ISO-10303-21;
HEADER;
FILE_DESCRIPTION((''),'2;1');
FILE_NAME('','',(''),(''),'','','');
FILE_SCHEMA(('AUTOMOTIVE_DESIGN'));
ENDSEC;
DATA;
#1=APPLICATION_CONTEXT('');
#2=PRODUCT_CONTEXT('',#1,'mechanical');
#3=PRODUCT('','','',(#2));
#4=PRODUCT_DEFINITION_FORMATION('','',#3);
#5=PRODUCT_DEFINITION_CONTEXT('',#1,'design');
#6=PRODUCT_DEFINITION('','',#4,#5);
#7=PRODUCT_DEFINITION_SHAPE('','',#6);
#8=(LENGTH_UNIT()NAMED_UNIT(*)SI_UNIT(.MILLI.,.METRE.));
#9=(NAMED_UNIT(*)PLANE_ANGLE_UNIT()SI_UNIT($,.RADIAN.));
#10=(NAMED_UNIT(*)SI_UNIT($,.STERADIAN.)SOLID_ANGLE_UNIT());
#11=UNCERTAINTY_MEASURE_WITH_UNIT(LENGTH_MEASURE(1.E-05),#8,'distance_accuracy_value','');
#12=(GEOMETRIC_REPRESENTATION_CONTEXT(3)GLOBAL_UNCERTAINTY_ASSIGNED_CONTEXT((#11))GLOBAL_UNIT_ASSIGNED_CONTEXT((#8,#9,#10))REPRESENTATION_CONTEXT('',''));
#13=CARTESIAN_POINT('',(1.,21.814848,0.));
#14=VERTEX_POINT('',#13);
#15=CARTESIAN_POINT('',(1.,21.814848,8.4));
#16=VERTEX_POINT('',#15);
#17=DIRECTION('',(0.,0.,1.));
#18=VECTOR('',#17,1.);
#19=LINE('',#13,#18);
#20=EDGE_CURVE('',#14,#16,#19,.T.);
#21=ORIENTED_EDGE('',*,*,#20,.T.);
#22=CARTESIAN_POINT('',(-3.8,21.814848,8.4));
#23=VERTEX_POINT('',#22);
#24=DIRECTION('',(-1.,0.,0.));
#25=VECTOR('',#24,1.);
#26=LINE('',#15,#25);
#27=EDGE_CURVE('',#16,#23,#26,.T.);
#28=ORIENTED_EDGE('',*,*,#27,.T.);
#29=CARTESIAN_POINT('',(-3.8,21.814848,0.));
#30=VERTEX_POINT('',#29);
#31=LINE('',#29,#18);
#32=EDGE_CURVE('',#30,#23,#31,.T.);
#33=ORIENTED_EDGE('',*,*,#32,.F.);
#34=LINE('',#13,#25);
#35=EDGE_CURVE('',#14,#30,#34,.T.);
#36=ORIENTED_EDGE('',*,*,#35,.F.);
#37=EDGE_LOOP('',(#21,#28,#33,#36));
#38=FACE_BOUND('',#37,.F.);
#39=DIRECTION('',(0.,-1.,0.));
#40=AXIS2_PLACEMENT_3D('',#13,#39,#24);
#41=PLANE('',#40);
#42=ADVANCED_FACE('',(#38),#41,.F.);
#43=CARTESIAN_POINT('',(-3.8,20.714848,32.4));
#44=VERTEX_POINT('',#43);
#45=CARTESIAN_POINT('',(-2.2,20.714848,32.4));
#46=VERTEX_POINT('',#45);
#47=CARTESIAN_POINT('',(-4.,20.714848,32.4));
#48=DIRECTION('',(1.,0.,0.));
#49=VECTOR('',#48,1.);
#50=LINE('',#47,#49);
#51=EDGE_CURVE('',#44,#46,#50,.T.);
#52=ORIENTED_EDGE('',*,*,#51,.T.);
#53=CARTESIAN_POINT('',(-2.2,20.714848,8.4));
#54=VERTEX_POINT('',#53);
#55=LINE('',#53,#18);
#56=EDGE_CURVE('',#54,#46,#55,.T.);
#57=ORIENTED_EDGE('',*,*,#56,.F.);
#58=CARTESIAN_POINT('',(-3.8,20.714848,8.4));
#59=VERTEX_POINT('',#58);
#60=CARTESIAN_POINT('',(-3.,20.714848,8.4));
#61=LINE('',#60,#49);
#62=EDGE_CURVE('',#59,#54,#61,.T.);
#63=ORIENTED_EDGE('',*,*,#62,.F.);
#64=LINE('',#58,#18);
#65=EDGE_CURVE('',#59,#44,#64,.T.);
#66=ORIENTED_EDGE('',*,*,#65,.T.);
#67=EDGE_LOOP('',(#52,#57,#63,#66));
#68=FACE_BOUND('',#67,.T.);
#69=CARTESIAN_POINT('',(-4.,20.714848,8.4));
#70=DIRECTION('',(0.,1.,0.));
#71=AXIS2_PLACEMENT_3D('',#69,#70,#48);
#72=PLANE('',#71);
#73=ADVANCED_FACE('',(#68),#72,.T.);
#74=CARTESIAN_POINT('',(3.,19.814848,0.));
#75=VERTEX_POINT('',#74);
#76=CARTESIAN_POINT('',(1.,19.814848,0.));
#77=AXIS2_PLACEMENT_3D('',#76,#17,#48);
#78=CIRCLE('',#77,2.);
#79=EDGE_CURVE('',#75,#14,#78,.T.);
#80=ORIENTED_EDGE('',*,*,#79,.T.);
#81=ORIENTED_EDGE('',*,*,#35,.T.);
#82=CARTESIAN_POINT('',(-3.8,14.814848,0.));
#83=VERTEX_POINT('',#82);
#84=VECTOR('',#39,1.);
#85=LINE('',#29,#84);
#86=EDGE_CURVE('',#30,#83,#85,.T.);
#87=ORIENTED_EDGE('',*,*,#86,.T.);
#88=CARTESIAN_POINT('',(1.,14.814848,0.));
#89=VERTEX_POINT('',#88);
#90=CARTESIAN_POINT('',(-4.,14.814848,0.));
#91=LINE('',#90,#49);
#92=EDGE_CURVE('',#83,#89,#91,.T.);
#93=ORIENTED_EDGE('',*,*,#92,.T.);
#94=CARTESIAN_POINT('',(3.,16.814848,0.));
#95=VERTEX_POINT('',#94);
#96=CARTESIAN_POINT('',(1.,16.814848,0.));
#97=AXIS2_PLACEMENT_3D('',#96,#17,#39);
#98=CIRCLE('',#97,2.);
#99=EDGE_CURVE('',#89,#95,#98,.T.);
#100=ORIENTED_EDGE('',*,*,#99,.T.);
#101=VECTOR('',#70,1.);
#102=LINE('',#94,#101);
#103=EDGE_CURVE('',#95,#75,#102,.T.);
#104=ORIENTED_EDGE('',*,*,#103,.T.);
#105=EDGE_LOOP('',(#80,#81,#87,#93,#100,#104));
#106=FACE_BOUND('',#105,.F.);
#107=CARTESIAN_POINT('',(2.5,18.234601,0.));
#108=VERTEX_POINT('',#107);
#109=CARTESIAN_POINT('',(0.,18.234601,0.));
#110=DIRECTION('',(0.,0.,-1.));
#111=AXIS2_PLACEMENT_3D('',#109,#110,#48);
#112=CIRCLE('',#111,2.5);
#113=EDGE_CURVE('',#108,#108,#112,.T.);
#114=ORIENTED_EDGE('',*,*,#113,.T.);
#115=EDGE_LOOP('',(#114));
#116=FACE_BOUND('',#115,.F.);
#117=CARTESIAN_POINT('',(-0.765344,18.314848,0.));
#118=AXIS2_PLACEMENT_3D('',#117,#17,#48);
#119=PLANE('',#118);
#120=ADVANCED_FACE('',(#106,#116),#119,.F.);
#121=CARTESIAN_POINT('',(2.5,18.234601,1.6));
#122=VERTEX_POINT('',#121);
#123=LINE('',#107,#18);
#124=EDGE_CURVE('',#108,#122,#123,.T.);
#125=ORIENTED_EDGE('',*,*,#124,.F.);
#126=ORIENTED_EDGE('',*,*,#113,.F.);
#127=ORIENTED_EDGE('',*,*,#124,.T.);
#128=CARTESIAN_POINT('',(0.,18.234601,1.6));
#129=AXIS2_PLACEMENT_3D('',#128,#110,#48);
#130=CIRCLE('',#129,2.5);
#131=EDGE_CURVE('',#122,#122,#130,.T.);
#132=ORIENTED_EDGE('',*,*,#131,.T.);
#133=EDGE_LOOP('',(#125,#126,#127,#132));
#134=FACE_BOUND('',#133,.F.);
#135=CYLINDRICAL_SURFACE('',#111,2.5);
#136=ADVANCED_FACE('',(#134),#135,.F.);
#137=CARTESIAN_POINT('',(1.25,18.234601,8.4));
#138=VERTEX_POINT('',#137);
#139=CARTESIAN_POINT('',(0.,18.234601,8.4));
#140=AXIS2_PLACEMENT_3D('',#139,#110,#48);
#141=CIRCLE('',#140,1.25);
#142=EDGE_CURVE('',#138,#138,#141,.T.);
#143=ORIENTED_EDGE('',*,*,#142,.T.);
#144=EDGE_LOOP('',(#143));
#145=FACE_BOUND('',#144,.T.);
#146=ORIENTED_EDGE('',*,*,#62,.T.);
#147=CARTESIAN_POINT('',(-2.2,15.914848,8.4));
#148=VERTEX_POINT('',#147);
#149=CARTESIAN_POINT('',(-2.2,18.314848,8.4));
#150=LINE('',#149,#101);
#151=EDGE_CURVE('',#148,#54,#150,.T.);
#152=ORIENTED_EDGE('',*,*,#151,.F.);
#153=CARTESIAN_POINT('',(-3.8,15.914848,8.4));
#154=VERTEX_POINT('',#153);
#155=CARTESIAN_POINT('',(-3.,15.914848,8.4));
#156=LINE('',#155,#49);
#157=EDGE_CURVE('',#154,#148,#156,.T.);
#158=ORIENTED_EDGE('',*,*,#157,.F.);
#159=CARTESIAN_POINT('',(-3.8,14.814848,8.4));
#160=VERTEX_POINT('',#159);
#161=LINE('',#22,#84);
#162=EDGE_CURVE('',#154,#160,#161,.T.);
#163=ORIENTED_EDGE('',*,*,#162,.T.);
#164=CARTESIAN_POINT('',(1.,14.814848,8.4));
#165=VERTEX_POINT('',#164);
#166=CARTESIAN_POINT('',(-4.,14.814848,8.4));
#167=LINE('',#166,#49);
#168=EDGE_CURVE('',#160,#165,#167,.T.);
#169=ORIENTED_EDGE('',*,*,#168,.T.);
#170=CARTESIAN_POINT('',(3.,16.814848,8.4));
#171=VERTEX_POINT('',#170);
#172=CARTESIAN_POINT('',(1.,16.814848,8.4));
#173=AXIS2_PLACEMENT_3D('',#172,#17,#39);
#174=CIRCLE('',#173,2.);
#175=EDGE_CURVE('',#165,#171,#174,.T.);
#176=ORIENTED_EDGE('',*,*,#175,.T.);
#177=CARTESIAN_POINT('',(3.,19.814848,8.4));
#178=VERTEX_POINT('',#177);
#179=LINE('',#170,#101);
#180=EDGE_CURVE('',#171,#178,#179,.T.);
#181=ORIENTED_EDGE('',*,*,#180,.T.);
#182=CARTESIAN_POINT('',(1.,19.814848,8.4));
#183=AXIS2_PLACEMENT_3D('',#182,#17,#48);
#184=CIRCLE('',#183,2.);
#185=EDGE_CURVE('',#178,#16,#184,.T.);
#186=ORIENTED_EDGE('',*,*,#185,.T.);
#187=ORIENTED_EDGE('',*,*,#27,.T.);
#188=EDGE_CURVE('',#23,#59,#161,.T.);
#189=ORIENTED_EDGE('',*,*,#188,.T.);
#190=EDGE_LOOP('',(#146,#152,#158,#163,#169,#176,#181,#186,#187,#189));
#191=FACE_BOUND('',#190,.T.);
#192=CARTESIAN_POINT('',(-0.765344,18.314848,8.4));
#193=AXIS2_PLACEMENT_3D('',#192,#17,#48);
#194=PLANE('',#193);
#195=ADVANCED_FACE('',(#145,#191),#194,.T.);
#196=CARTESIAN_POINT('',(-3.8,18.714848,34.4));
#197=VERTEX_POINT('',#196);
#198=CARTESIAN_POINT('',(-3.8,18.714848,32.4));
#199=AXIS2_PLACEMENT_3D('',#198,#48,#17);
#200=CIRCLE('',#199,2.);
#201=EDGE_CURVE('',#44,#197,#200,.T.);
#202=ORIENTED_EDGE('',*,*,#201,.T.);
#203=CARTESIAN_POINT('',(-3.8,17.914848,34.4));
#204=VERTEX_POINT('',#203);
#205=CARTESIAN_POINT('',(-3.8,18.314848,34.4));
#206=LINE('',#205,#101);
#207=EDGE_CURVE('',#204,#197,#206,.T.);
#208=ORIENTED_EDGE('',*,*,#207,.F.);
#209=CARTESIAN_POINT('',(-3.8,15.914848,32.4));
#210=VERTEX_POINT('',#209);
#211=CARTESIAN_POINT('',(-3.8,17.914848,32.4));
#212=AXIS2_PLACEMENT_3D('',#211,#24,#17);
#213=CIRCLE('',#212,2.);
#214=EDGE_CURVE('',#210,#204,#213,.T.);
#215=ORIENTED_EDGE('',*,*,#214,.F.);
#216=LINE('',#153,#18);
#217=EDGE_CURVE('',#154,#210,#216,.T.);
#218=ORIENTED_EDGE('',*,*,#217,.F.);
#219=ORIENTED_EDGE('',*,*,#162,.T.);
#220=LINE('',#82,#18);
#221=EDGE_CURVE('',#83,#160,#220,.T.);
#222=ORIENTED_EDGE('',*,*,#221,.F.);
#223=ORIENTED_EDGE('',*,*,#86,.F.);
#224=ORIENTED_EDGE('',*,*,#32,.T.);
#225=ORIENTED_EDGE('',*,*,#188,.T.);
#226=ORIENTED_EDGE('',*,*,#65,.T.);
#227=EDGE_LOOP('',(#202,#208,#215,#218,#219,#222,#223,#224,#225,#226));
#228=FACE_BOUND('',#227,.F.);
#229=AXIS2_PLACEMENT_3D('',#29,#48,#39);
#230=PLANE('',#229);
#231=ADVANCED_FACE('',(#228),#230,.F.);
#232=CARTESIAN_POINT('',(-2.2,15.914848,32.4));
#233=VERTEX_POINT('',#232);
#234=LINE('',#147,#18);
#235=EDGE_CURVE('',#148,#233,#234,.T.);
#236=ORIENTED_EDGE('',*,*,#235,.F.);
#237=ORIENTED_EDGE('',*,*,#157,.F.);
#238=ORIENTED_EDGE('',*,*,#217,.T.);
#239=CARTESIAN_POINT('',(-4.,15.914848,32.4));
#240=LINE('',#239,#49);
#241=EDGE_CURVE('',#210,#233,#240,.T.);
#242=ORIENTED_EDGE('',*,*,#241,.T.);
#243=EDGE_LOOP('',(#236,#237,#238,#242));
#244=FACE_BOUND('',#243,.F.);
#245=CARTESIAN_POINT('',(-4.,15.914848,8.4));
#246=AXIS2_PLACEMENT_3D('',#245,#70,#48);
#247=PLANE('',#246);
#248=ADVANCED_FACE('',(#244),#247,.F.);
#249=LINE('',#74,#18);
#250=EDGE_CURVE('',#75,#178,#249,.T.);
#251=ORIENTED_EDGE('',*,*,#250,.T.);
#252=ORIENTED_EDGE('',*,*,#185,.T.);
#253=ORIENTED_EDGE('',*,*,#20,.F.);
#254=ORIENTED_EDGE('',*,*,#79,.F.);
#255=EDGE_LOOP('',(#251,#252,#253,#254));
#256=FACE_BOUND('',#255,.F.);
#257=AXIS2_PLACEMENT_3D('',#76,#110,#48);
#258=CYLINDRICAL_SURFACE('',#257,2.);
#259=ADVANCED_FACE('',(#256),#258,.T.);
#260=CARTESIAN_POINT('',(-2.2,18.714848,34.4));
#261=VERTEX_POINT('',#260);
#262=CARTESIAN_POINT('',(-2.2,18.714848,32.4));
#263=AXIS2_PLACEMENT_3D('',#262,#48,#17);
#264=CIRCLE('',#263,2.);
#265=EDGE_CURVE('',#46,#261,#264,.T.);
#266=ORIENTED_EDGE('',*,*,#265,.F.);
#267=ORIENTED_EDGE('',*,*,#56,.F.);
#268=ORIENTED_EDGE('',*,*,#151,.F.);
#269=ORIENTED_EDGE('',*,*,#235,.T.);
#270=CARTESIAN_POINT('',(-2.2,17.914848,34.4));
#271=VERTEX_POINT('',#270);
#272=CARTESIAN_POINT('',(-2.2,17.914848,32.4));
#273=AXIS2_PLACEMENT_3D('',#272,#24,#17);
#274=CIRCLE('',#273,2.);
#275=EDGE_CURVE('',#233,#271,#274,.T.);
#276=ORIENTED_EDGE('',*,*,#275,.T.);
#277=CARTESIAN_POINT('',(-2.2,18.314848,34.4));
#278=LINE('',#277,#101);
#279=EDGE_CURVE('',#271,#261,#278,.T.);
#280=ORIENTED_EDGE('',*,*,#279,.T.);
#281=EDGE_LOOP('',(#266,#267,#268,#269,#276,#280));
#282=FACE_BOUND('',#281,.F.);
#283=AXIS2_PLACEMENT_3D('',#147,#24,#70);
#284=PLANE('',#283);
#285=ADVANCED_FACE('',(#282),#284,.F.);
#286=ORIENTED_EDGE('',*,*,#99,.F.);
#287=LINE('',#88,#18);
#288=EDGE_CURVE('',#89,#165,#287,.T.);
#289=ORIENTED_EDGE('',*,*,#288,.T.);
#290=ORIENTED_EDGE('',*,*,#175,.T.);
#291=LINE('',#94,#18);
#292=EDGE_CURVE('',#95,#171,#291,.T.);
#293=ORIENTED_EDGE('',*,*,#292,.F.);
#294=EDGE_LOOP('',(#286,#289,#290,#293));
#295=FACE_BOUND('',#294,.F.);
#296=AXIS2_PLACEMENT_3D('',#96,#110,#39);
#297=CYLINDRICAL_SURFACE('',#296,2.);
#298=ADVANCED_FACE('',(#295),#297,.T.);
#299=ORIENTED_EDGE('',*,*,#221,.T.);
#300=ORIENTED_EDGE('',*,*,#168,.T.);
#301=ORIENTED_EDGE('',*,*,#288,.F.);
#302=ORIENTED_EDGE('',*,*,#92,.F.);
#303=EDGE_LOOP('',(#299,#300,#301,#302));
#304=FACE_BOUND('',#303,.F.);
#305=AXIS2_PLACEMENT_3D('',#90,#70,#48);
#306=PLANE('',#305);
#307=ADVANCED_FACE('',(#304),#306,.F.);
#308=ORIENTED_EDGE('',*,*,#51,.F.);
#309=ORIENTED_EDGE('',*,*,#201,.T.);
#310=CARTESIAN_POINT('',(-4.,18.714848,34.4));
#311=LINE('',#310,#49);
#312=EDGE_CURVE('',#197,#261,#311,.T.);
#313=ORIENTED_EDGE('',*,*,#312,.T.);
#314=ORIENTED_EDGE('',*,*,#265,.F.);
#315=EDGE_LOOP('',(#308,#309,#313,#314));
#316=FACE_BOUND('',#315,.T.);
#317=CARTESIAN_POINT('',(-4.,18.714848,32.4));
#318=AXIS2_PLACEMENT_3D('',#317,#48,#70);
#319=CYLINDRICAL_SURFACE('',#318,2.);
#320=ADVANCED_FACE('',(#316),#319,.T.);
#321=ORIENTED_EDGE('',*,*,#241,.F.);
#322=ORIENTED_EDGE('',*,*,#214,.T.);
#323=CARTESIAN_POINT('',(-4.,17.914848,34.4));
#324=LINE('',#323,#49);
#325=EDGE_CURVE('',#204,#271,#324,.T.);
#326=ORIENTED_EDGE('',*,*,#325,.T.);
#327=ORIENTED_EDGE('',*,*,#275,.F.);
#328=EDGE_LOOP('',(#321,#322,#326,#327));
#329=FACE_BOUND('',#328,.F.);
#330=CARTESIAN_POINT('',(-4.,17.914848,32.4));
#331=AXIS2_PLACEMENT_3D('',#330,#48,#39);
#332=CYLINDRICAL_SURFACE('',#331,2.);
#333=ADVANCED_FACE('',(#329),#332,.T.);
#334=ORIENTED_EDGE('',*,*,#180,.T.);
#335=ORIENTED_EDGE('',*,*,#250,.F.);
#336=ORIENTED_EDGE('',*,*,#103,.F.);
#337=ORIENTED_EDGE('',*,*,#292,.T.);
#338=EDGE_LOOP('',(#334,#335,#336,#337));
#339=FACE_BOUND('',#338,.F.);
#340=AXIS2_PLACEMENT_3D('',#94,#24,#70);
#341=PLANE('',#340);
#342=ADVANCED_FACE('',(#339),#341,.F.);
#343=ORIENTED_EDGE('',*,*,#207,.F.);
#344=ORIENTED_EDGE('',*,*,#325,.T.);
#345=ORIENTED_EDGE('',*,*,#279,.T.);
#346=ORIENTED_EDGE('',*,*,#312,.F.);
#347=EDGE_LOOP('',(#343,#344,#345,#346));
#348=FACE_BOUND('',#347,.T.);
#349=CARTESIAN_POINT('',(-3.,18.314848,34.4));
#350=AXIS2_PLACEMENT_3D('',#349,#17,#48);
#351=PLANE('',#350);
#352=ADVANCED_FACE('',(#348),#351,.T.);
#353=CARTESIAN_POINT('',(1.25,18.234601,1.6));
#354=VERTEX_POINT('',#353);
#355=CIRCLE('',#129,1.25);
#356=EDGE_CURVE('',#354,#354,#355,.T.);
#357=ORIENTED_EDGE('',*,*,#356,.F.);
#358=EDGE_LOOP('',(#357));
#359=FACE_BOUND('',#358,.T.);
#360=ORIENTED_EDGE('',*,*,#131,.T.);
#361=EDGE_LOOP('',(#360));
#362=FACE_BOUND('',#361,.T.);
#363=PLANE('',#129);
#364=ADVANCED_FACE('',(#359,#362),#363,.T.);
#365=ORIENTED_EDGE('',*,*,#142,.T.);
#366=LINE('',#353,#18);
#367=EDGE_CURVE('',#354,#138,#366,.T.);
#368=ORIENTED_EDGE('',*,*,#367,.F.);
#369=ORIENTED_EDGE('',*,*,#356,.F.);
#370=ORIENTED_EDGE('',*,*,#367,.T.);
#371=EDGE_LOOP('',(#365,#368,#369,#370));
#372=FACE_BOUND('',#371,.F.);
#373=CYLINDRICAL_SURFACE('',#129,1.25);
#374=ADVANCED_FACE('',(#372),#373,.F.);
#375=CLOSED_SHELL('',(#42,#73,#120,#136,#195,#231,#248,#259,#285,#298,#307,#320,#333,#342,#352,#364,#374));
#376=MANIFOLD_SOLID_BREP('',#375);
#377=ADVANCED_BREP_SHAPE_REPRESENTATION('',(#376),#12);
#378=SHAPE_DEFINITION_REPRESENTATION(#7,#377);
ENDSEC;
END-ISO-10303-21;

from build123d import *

# Parameters (mm, degrees)
F1_DEPTH  = 8.4
F2_R      = 2.5
F3_DEPTH  = 1.6
F4_R      = 1.25
F5_DEPTH  = 10
F6_W      = 2
F6_H      = 4.8
F7_DEPTH  = 26
F8_R      = 2
F9_DEPTH  = 0.2
F10_DEPTH = 0.2


# Not quite as in the source:
# - a feature names something its author has since deleted; it is built from what else it names


with BuildPart() as f1:
    # F0 (on Top) → F1 (new body)
    with BuildSketch(Plane.XY):
        with BuildLine():
            Line((1, 21.8148477226), (-4, 21.8148477226))
            Line((-4, 21.8148477226), (-4, 14.8148477226))
            Line((-4, 14.8148477226), (1, 14.8148477226))
            ThreePointArc((1, 14.8148477226), (2.4142135624, 15.4006341603), (3, 16.8148477226))
            Line((3, 16.8148477226), (3, 19.8148477226))
            ThreePointArc((3, 19.8148477226), (2.4142135624, 21.229061285), (1, 21.8148477226))
        make_face()
    extrude(amount=F1_DEPTH)

    # F2 (on face) → F3 (cut)
    with BuildSketch(Plane(origin=(0, 0, 0), x_dir=(1, 0, 0), z_dir=(0, 0, -1))):
        with Locations((0, -18.2346012443)):
            Circle(F2_R)
    extrude(amount=-F3_DEPTH, mode=Mode.SUBTRACT)

    # F4 (on face) → F5 (cut)
    with BuildSketch(Plane(origin=(0, 0, 1.6), x_dir=(1, 0, 0), z_dir=(0, 0, -1))):
        with Locations((0, -18.2346012443)):
            Circle(F4_R)
    extrude(amount=-F5_DEPTH, mode=Mode.SUBTRACT)

    # F6 (on face) → F7 (join)
    with BuildSketch(Plane.XY.offset(8.4)):
        with Locations((-3, 18.3148477226)):
            Rectangle(F6_W, F6_H)
    extrude(amount=F7_DEPTH)

    # F8
    f8_edges = [f1.edges().sort_by_distance(p)[0] for p in [
        (-3, 20.714848, 34.4),
        (-3, 15.914848, 34.4),
    ]]
    fillet(f8_edges, radius=F8_R)

    # F9 (cut): a face of the model
    f9_faces = [f1.faces().sort_by_distance(p)[0] for p in [
        (-2, 18.3148477226, 21.2249019293),
    ]]
    extrude(f9_faces, amount=-F9_DEPTH, mode=Mode.SUBTRACT)

    # F10 (cut): a face of the model
    f10_faces = [f1.faces().sort_by_distance(p)[0] for p in [
        (-4, 18.3148477226, 15.72101639),
    ]]
    extrude(f10_faces, amount=-F10_DEPTH, mode=Mode.SUBTRACT)


solid = f1.part
